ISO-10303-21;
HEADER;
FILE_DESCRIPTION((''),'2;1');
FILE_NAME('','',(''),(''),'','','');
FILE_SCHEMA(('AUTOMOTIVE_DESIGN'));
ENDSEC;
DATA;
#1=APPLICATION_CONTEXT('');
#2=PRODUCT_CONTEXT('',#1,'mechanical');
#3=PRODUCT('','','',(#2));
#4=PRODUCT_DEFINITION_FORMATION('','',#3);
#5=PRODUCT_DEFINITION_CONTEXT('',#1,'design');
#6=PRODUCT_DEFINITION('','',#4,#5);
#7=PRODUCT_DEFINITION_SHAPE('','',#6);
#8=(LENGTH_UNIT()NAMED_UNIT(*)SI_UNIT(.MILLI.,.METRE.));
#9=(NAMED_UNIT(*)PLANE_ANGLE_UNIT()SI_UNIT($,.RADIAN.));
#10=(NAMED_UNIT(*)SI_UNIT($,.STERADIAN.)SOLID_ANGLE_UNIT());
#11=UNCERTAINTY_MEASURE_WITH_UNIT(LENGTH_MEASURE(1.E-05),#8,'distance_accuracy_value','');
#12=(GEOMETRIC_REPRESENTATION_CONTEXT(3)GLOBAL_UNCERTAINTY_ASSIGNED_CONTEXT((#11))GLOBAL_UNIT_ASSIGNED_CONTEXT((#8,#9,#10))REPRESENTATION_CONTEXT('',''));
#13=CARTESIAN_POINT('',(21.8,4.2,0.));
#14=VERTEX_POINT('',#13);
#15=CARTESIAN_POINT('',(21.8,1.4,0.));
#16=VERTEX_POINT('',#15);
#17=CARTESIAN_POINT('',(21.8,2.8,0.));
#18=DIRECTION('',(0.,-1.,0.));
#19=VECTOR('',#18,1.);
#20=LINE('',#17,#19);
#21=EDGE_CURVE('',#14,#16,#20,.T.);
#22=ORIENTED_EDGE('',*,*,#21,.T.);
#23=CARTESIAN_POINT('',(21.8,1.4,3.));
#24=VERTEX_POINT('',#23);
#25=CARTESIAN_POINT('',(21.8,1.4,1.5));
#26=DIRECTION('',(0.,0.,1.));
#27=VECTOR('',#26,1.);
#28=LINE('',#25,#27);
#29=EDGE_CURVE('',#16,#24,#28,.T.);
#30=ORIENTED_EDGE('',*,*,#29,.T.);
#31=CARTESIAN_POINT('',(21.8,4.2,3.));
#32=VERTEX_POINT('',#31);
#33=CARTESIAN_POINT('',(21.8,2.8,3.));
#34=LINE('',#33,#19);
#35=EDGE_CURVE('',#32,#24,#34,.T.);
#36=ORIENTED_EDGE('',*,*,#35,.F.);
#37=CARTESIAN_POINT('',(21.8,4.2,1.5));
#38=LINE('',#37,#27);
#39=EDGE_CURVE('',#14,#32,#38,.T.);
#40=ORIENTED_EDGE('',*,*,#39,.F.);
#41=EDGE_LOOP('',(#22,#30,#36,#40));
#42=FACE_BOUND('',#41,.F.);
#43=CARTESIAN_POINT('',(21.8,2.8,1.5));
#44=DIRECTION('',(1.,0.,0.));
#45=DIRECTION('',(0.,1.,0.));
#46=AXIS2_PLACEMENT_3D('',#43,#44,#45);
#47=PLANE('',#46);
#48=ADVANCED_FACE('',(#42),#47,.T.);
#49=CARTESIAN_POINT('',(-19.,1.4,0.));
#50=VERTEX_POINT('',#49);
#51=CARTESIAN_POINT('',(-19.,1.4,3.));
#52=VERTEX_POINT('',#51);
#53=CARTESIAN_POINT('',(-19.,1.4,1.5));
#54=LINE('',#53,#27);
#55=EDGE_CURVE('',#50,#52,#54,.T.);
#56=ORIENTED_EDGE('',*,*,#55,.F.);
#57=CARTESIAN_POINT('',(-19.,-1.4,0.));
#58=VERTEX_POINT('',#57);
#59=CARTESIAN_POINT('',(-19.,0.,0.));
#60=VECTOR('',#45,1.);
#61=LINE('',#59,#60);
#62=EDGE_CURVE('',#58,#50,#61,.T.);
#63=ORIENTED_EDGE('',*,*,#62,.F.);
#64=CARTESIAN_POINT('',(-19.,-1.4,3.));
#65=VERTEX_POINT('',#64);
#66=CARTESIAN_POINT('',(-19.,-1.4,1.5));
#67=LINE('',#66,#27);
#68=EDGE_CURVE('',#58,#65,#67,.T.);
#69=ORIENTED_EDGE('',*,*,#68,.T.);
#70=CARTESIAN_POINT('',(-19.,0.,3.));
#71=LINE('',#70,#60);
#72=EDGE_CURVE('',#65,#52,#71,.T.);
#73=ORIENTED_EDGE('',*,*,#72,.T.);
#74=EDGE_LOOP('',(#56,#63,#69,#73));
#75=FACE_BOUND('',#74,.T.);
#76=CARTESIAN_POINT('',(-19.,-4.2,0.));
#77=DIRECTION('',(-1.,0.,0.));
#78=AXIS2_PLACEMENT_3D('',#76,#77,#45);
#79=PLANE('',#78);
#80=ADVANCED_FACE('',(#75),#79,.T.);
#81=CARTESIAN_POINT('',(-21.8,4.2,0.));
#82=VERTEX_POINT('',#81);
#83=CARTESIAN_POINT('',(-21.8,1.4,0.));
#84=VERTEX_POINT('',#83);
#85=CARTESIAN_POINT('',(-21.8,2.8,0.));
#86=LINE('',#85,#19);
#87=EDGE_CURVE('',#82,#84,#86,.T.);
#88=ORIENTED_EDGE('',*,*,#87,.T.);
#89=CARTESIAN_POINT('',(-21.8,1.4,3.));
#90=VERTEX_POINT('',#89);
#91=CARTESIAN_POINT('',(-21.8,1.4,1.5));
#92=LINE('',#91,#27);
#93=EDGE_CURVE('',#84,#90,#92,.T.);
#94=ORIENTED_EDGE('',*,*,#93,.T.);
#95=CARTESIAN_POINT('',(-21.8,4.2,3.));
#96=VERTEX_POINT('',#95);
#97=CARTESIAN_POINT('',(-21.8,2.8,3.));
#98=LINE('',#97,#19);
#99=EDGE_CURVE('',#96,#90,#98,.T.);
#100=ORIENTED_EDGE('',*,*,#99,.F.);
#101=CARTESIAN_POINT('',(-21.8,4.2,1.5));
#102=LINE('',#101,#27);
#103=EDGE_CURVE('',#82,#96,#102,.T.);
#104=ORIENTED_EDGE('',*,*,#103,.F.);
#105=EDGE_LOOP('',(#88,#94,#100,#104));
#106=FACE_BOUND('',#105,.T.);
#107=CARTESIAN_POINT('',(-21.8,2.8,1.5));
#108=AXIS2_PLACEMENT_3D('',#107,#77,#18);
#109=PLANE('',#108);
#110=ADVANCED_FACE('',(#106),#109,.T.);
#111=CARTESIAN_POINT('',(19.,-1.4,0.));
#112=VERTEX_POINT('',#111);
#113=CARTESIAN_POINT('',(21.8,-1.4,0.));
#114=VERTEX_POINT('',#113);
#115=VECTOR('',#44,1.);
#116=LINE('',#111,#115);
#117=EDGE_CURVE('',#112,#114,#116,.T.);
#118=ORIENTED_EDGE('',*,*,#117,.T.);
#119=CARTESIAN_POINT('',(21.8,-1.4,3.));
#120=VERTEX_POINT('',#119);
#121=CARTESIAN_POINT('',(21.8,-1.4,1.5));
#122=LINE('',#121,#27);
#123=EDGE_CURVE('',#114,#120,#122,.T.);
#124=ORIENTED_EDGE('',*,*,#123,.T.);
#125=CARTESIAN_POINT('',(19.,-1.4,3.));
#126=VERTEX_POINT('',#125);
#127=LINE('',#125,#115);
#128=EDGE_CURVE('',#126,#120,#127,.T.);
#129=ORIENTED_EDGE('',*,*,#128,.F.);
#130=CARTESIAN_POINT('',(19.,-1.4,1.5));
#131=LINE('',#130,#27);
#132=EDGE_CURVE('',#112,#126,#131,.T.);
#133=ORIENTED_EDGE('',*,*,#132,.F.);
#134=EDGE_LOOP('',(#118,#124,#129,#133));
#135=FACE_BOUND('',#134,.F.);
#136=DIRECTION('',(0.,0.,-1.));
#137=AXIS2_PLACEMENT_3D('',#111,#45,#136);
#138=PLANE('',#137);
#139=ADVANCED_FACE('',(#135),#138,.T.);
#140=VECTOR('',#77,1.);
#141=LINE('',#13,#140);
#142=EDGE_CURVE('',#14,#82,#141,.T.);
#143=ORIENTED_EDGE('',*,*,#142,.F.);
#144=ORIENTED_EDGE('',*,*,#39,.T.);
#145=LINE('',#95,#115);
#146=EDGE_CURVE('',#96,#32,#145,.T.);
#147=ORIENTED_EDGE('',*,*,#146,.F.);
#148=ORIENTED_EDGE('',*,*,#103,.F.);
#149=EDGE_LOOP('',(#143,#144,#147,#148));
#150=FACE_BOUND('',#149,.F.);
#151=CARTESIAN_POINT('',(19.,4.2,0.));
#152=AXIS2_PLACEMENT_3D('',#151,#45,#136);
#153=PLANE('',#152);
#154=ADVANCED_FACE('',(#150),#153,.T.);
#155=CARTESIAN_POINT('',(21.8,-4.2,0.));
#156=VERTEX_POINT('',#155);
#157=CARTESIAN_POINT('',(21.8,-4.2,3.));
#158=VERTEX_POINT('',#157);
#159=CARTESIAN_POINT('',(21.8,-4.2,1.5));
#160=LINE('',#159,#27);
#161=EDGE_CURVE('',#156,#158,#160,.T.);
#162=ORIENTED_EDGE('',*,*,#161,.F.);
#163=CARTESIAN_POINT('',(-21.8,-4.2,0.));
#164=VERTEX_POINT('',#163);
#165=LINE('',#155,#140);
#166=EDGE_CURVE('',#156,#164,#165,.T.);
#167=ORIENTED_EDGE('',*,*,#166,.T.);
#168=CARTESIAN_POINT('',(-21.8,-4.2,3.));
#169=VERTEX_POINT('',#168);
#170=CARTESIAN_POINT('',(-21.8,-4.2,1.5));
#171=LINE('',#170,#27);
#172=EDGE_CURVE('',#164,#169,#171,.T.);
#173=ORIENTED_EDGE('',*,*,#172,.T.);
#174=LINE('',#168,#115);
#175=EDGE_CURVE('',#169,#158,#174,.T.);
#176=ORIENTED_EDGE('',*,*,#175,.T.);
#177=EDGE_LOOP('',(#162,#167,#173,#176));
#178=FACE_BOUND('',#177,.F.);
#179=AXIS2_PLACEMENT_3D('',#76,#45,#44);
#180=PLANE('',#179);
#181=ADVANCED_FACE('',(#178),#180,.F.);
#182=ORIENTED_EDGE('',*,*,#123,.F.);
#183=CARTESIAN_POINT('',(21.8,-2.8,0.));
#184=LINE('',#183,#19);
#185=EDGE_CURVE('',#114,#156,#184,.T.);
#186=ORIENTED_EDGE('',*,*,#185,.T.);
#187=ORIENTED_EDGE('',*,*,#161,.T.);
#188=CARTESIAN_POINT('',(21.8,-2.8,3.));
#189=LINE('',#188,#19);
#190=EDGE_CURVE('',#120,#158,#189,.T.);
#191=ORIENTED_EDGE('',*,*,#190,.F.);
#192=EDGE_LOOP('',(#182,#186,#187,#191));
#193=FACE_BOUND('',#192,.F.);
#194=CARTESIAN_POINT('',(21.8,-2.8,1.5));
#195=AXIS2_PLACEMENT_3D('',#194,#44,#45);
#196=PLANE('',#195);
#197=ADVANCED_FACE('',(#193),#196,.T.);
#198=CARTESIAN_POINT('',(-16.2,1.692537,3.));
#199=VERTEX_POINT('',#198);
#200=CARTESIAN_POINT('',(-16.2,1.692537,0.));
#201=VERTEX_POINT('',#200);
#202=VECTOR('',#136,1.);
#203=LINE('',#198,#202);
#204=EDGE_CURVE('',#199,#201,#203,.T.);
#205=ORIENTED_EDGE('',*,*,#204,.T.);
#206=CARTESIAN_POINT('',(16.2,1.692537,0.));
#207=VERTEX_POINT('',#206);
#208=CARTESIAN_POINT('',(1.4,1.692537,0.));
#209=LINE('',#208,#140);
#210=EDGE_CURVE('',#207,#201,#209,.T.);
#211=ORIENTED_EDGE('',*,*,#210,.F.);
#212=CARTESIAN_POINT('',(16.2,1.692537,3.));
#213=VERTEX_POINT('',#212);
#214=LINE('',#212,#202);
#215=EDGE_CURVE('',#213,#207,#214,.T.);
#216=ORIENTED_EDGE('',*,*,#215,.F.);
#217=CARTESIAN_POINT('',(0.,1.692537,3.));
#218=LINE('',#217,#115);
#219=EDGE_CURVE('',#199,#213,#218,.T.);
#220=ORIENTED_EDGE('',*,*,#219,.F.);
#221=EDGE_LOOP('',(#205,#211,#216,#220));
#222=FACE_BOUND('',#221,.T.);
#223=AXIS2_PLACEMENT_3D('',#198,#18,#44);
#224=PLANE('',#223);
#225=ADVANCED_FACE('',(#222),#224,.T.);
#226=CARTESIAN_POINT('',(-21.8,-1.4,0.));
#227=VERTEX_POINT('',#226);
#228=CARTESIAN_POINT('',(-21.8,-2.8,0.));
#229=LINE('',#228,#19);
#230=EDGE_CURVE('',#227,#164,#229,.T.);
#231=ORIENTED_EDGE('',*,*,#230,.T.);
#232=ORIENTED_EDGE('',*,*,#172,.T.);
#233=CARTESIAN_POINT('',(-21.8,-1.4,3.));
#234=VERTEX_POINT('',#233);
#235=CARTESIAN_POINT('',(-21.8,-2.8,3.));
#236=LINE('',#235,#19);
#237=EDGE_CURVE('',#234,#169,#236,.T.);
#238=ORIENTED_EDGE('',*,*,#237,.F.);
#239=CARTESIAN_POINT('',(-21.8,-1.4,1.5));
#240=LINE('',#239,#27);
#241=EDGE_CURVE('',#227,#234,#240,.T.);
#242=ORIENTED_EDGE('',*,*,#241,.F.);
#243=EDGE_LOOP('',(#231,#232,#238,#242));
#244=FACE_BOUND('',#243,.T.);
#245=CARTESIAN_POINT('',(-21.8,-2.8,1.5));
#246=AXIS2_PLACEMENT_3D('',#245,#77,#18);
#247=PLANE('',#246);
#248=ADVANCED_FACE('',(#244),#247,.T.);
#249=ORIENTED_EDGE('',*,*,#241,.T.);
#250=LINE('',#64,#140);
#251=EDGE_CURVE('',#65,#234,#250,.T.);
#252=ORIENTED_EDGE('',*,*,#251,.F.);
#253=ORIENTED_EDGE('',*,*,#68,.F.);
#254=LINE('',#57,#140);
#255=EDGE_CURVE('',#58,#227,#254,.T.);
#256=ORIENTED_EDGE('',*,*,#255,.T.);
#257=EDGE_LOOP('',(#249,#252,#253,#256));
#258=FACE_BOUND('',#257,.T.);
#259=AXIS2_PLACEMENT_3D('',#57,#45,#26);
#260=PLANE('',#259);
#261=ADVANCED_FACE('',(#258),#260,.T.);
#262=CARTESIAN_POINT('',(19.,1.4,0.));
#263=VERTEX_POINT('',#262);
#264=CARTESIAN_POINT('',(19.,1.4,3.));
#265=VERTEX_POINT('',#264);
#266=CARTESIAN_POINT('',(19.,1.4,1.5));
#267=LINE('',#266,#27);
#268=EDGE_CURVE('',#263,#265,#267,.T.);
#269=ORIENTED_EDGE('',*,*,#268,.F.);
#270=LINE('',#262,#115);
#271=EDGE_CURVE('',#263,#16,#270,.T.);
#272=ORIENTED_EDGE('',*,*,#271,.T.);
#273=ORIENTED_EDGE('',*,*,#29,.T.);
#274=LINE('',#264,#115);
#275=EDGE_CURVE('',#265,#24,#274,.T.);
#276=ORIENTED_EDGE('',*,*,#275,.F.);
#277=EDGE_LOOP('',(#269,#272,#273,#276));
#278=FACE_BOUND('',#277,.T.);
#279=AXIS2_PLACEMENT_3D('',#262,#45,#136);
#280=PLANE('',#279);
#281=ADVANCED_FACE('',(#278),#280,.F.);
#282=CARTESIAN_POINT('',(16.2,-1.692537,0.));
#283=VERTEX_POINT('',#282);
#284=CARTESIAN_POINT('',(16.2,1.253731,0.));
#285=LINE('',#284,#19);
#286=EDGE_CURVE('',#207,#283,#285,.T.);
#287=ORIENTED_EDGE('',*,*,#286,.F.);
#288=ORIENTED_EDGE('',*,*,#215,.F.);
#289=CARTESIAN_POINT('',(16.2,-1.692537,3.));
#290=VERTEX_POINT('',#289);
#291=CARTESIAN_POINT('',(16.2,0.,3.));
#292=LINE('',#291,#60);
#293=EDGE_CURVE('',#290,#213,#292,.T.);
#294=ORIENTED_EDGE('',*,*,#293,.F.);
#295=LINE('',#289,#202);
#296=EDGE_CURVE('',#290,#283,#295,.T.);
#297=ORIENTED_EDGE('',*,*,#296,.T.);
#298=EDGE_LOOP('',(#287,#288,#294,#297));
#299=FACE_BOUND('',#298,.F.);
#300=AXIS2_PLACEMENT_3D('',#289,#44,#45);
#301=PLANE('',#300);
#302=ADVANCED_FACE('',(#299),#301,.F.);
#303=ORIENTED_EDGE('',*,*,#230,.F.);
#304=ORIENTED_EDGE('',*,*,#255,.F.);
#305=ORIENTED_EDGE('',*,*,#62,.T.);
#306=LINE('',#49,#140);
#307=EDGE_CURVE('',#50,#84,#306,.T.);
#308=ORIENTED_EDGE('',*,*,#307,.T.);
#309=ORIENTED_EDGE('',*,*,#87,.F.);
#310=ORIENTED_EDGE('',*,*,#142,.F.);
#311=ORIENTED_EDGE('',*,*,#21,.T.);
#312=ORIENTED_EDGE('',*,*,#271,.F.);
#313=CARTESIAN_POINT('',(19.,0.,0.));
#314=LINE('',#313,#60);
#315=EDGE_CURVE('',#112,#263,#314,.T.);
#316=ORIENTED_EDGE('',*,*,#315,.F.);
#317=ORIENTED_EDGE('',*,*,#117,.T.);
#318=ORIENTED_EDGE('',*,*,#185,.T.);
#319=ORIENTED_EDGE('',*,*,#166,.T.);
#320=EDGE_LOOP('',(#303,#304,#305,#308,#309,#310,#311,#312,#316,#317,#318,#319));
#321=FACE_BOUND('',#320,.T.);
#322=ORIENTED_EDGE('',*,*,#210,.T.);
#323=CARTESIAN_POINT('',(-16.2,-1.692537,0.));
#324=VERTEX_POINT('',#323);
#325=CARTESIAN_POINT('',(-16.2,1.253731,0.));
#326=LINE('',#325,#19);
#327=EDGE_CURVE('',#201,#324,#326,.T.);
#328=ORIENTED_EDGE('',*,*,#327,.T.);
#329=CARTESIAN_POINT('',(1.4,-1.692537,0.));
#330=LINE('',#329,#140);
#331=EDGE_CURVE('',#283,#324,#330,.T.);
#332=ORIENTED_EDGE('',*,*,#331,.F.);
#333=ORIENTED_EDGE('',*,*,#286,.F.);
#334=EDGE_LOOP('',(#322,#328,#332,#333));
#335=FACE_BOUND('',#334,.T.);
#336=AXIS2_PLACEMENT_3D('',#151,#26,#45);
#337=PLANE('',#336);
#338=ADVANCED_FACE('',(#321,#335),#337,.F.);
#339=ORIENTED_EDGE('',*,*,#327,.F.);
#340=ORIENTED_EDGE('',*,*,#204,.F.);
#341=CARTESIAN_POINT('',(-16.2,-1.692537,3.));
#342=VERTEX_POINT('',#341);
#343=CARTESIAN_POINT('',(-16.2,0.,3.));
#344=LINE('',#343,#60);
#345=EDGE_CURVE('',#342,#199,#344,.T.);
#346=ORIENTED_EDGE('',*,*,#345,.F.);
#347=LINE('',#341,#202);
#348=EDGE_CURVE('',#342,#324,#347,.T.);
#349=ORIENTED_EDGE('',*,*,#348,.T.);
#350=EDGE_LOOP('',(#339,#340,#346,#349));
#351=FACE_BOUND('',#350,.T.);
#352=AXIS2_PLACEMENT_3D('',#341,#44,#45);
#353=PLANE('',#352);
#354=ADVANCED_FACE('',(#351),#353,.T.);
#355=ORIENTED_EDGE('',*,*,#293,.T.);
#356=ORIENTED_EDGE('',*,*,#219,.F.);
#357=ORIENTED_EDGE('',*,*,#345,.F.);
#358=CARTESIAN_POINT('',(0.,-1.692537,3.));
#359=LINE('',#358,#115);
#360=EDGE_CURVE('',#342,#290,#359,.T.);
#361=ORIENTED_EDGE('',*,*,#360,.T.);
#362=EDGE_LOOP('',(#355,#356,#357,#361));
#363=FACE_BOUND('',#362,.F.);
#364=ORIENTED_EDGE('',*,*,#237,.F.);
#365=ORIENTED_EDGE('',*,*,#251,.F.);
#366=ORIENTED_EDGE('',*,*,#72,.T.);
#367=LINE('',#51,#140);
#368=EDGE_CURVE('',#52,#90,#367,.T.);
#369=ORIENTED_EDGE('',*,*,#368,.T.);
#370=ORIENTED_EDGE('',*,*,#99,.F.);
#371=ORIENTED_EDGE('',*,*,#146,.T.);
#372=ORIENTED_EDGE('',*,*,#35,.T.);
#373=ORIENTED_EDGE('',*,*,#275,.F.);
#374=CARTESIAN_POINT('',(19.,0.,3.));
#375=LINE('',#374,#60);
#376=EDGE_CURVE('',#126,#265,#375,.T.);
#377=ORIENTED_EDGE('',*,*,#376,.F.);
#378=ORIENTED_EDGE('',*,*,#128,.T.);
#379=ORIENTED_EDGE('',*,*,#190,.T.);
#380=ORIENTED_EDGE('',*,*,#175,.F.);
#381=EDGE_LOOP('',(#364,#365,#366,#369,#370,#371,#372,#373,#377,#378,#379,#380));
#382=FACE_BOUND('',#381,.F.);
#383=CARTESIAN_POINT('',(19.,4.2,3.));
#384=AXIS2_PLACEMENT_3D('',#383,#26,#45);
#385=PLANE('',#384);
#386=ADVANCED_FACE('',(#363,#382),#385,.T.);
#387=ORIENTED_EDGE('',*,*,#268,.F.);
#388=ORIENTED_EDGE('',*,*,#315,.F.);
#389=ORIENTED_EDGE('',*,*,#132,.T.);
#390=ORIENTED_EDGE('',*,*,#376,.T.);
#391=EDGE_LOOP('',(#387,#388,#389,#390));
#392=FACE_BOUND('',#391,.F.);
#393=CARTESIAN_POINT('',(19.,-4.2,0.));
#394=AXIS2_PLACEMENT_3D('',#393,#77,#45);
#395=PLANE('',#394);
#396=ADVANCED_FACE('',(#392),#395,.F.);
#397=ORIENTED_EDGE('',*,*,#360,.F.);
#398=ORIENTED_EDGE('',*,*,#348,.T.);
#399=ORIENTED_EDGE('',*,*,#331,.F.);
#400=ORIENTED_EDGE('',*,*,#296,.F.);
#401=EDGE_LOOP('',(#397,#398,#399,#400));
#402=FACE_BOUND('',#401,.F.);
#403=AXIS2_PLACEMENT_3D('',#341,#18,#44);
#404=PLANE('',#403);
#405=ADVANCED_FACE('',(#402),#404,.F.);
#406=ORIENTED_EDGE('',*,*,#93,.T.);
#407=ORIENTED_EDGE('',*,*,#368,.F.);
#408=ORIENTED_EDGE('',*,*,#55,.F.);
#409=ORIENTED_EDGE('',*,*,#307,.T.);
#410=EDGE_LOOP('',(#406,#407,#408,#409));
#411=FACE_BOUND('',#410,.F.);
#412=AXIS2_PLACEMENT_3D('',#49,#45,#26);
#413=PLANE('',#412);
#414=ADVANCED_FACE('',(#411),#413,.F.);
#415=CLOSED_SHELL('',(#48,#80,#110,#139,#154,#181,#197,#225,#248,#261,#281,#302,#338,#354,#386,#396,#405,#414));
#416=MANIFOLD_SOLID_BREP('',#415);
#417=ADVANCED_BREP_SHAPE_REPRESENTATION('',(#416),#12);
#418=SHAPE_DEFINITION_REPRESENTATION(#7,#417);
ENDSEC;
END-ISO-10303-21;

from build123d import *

# Parameters (mm, degrees)
F0_W     = 38
F0_H     = 8.4
F1_DEPTH = 3
F2_W     = 2.8
F2_H     = 3
F3_DEPTH = 2.8
F4_W     = 32.4
F4_H     = 3.3850746269
F5_DEPTH = 25


# Not quite as in the source:
# - a pattern or mirror of a feature is missing from the dataset's text; its kind, count and spacing are read off the source's solid


with BuildPart() as f1:
    # F0 (on Top) → F1 (new body)
    with BuildSketch(Plane.XY):
        Rectangle(F0_W, F0_H)
    extrude(amount=F1_DEPTH)

    # F2 (on face) → F3 (join)
    with BuildSketch(Plane(origin=(-19, 0, 0), x_dir=(0, -1, 0), z_dir=(-1, 0, 0))):
        with Locations((-2.8, 1.5)):
            Rectangle(F2_W, F2_H)
        with Locations((2.8, 1.5)):
            Rectangle(F2_W, F2_H)
    f3 = extrude(amount=F3_DEPTH)

    # F3_copies: F3 across plane
    add(f3.mirror(Plane(origin=(0, 0, 0), x_dir=(0, 0, 1), z_dir=(1, 0, 0))))

    # F4 (on face) → F5 (cut)
    with BuildSketch(Plane.XY.offset(3)):
        Rectangle(F4_W, F4_H)
    extrude(amount=-F5_DEPTH, mode=Mode.SUBTRACT)


solid = f1.part
